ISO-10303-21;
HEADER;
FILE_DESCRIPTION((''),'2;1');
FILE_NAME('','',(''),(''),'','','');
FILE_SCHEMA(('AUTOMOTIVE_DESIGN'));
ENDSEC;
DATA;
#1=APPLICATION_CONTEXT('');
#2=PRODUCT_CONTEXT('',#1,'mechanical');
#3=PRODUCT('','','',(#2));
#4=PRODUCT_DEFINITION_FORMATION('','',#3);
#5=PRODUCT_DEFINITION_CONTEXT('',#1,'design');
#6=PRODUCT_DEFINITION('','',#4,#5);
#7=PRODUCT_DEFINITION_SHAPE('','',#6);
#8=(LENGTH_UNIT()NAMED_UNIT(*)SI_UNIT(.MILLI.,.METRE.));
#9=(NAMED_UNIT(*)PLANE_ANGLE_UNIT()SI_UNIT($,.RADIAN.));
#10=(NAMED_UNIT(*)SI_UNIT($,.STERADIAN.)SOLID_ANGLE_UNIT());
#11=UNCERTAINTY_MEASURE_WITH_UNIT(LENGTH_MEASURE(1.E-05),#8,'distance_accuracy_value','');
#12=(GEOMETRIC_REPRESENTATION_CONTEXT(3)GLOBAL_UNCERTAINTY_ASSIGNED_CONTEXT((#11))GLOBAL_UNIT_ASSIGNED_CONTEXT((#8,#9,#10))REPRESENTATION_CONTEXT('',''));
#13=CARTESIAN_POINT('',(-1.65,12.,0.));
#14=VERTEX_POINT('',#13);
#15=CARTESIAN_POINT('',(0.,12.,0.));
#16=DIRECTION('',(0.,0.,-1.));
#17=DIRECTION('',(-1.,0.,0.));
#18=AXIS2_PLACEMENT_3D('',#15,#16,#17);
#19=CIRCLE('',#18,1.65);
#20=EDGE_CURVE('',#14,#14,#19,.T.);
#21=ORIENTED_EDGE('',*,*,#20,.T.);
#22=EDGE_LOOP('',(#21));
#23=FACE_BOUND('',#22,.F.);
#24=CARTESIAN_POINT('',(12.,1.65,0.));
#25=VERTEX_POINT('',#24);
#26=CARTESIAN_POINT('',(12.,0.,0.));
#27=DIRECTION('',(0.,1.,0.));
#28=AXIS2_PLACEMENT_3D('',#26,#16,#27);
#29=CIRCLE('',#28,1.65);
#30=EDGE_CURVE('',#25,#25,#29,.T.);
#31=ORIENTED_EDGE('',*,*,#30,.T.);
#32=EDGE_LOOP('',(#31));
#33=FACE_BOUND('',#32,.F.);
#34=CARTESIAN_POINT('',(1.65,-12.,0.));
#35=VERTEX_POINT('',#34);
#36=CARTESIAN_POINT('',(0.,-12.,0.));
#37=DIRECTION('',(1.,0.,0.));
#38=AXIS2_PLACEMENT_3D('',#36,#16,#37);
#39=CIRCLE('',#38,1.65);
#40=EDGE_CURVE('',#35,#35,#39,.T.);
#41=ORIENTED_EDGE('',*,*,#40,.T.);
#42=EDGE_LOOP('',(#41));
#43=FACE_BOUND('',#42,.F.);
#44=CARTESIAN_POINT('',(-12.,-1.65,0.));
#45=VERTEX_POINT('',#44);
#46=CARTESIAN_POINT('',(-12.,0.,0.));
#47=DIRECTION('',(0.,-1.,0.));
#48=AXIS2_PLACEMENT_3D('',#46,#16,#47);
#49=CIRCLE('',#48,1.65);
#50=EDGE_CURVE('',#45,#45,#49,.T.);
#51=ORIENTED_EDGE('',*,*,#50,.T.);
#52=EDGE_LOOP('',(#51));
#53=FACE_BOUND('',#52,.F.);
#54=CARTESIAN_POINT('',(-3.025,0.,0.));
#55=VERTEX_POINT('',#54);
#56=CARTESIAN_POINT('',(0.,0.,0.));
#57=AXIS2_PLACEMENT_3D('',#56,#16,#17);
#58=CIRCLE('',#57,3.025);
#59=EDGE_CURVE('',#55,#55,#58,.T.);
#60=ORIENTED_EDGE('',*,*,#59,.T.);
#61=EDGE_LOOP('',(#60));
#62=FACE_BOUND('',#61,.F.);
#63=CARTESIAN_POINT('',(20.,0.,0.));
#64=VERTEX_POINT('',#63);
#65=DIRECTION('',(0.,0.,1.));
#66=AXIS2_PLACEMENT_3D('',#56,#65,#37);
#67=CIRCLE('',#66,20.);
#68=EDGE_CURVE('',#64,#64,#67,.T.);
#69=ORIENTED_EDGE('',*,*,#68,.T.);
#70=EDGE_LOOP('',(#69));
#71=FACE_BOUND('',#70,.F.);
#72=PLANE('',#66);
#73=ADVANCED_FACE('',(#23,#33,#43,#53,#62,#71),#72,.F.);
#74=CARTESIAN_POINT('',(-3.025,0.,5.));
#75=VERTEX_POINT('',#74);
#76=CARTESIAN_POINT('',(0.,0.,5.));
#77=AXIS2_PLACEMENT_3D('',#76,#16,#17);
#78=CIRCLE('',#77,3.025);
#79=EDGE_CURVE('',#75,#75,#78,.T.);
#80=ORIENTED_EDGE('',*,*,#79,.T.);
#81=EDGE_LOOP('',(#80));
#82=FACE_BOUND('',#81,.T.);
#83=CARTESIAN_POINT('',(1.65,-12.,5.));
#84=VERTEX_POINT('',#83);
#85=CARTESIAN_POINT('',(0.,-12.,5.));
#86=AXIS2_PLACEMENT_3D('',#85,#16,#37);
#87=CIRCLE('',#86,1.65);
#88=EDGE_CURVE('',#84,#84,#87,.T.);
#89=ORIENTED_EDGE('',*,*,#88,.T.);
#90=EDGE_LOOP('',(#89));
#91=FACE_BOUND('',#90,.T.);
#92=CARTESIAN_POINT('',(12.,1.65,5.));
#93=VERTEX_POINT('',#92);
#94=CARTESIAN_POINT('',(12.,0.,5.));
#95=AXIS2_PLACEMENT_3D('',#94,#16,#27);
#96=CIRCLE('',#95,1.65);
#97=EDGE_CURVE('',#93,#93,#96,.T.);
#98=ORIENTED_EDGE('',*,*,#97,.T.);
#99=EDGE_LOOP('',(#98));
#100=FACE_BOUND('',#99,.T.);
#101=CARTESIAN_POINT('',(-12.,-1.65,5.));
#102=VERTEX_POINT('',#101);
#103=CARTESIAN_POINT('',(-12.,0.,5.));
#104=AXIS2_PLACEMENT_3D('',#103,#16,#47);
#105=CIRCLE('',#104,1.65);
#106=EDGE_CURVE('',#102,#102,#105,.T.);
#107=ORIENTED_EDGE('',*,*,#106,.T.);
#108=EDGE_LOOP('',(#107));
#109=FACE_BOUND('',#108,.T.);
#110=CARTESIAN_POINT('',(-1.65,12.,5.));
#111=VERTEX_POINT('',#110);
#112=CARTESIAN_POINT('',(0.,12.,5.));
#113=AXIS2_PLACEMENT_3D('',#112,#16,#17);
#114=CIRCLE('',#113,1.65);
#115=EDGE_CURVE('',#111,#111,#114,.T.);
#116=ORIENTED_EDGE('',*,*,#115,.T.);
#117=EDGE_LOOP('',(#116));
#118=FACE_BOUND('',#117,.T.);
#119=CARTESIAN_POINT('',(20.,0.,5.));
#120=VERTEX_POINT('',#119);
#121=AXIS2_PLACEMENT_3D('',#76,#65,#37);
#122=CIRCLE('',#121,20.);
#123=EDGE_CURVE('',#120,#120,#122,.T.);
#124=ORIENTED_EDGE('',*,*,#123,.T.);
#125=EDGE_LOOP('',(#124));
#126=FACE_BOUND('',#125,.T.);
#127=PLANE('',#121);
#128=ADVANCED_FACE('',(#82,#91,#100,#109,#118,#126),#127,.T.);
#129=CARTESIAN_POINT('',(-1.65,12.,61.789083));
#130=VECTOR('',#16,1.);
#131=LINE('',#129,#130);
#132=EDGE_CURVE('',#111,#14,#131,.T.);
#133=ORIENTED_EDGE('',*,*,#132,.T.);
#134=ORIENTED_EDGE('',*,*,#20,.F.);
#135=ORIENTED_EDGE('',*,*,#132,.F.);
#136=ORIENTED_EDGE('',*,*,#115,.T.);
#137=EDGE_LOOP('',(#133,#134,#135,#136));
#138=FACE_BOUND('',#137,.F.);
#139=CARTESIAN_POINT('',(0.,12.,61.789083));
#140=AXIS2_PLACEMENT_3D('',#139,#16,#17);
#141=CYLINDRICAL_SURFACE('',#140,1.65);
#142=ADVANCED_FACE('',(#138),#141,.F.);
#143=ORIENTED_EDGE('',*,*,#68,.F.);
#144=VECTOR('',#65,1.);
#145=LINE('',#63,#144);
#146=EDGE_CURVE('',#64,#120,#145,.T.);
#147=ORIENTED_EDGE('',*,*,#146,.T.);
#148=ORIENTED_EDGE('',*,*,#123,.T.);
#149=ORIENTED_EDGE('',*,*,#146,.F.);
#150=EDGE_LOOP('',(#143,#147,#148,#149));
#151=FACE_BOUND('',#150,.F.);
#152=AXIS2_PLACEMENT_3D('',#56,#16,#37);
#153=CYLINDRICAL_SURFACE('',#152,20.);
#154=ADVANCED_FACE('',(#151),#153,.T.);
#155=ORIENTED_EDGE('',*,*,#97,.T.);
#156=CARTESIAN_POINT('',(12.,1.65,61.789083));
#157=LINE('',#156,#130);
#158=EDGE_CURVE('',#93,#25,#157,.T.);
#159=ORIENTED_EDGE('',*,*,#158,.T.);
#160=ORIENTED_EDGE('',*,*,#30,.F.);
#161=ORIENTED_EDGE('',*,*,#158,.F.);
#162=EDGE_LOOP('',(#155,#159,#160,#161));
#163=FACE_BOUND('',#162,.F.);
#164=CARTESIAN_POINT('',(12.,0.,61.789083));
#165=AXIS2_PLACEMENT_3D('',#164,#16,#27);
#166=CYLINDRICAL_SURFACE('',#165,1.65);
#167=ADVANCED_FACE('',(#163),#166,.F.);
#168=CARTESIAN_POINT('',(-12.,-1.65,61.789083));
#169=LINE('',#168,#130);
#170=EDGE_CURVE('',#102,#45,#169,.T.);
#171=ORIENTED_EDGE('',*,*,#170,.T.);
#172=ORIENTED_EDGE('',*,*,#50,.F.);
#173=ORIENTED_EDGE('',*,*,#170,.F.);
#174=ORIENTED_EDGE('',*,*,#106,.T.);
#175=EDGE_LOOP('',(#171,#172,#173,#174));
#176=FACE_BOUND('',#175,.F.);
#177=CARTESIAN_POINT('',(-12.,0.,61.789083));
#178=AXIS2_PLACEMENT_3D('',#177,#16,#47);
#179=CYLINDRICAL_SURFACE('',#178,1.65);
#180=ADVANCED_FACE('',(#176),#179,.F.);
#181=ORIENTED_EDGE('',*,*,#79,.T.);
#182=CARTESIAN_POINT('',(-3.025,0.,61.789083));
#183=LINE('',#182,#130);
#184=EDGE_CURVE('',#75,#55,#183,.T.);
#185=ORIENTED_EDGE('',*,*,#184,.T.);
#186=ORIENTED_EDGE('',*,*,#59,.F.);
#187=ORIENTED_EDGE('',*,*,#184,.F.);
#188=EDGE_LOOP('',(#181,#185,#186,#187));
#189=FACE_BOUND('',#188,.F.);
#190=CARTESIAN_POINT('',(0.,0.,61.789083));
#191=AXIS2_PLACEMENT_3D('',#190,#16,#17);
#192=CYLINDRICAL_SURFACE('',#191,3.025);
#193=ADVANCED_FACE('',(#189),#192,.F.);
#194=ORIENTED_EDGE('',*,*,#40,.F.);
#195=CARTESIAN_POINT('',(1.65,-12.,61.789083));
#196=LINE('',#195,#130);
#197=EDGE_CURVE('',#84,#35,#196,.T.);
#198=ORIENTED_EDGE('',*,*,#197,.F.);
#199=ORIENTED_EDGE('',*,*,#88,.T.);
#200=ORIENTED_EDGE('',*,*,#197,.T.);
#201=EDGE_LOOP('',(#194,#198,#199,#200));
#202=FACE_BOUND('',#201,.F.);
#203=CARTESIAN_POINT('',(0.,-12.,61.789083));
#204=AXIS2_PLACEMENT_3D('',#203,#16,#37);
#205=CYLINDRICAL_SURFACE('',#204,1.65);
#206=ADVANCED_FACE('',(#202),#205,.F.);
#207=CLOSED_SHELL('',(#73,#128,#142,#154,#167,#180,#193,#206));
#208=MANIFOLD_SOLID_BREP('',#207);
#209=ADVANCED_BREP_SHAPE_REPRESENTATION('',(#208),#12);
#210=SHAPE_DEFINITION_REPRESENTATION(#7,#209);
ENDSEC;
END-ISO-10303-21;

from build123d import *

# Parameters (mm, degrees)
F0_R            = 20
F1_DEPTH        = 5
F3_D            = 3.3
F3_COPIES_COUNT = 4
F5_D            = 6.05


# Not quite as in the source:
# - a pattern or mirror of a feature is missing from the dataset's text; its kind, count and spacing are read off the source's solid


with BuildPart() as f1:
    # F0 (on Top) → F1 (new body)
    with BuildSketch(Plane.XY):
        Circle(F0_R)
    extrude(amount=F1_DEPTH)

    # F3 (through all)
    with Locations(Plane.XY.offset(5)):
        with Locations((0, 12)):
            f3 = Hole(F3_D / 2)

    # F3_copies: F3 ×4 about axis
    f3_copies_axis = Axis((0, 0, 0), (0, 0, 1))
    for i in range(1, F3_COPIES_COUNT):
        add(f3.rotate(f3_copies_axis, i * 360 / F3_COPIES_COUNT), mode=Mode.SUBTRACT)

    # F5 (through all)
    with Locations(Plane.XY.offset(5)):
        with Locations((0, 0)):
            Hole(F5_D / 2)


solid = f1.part
